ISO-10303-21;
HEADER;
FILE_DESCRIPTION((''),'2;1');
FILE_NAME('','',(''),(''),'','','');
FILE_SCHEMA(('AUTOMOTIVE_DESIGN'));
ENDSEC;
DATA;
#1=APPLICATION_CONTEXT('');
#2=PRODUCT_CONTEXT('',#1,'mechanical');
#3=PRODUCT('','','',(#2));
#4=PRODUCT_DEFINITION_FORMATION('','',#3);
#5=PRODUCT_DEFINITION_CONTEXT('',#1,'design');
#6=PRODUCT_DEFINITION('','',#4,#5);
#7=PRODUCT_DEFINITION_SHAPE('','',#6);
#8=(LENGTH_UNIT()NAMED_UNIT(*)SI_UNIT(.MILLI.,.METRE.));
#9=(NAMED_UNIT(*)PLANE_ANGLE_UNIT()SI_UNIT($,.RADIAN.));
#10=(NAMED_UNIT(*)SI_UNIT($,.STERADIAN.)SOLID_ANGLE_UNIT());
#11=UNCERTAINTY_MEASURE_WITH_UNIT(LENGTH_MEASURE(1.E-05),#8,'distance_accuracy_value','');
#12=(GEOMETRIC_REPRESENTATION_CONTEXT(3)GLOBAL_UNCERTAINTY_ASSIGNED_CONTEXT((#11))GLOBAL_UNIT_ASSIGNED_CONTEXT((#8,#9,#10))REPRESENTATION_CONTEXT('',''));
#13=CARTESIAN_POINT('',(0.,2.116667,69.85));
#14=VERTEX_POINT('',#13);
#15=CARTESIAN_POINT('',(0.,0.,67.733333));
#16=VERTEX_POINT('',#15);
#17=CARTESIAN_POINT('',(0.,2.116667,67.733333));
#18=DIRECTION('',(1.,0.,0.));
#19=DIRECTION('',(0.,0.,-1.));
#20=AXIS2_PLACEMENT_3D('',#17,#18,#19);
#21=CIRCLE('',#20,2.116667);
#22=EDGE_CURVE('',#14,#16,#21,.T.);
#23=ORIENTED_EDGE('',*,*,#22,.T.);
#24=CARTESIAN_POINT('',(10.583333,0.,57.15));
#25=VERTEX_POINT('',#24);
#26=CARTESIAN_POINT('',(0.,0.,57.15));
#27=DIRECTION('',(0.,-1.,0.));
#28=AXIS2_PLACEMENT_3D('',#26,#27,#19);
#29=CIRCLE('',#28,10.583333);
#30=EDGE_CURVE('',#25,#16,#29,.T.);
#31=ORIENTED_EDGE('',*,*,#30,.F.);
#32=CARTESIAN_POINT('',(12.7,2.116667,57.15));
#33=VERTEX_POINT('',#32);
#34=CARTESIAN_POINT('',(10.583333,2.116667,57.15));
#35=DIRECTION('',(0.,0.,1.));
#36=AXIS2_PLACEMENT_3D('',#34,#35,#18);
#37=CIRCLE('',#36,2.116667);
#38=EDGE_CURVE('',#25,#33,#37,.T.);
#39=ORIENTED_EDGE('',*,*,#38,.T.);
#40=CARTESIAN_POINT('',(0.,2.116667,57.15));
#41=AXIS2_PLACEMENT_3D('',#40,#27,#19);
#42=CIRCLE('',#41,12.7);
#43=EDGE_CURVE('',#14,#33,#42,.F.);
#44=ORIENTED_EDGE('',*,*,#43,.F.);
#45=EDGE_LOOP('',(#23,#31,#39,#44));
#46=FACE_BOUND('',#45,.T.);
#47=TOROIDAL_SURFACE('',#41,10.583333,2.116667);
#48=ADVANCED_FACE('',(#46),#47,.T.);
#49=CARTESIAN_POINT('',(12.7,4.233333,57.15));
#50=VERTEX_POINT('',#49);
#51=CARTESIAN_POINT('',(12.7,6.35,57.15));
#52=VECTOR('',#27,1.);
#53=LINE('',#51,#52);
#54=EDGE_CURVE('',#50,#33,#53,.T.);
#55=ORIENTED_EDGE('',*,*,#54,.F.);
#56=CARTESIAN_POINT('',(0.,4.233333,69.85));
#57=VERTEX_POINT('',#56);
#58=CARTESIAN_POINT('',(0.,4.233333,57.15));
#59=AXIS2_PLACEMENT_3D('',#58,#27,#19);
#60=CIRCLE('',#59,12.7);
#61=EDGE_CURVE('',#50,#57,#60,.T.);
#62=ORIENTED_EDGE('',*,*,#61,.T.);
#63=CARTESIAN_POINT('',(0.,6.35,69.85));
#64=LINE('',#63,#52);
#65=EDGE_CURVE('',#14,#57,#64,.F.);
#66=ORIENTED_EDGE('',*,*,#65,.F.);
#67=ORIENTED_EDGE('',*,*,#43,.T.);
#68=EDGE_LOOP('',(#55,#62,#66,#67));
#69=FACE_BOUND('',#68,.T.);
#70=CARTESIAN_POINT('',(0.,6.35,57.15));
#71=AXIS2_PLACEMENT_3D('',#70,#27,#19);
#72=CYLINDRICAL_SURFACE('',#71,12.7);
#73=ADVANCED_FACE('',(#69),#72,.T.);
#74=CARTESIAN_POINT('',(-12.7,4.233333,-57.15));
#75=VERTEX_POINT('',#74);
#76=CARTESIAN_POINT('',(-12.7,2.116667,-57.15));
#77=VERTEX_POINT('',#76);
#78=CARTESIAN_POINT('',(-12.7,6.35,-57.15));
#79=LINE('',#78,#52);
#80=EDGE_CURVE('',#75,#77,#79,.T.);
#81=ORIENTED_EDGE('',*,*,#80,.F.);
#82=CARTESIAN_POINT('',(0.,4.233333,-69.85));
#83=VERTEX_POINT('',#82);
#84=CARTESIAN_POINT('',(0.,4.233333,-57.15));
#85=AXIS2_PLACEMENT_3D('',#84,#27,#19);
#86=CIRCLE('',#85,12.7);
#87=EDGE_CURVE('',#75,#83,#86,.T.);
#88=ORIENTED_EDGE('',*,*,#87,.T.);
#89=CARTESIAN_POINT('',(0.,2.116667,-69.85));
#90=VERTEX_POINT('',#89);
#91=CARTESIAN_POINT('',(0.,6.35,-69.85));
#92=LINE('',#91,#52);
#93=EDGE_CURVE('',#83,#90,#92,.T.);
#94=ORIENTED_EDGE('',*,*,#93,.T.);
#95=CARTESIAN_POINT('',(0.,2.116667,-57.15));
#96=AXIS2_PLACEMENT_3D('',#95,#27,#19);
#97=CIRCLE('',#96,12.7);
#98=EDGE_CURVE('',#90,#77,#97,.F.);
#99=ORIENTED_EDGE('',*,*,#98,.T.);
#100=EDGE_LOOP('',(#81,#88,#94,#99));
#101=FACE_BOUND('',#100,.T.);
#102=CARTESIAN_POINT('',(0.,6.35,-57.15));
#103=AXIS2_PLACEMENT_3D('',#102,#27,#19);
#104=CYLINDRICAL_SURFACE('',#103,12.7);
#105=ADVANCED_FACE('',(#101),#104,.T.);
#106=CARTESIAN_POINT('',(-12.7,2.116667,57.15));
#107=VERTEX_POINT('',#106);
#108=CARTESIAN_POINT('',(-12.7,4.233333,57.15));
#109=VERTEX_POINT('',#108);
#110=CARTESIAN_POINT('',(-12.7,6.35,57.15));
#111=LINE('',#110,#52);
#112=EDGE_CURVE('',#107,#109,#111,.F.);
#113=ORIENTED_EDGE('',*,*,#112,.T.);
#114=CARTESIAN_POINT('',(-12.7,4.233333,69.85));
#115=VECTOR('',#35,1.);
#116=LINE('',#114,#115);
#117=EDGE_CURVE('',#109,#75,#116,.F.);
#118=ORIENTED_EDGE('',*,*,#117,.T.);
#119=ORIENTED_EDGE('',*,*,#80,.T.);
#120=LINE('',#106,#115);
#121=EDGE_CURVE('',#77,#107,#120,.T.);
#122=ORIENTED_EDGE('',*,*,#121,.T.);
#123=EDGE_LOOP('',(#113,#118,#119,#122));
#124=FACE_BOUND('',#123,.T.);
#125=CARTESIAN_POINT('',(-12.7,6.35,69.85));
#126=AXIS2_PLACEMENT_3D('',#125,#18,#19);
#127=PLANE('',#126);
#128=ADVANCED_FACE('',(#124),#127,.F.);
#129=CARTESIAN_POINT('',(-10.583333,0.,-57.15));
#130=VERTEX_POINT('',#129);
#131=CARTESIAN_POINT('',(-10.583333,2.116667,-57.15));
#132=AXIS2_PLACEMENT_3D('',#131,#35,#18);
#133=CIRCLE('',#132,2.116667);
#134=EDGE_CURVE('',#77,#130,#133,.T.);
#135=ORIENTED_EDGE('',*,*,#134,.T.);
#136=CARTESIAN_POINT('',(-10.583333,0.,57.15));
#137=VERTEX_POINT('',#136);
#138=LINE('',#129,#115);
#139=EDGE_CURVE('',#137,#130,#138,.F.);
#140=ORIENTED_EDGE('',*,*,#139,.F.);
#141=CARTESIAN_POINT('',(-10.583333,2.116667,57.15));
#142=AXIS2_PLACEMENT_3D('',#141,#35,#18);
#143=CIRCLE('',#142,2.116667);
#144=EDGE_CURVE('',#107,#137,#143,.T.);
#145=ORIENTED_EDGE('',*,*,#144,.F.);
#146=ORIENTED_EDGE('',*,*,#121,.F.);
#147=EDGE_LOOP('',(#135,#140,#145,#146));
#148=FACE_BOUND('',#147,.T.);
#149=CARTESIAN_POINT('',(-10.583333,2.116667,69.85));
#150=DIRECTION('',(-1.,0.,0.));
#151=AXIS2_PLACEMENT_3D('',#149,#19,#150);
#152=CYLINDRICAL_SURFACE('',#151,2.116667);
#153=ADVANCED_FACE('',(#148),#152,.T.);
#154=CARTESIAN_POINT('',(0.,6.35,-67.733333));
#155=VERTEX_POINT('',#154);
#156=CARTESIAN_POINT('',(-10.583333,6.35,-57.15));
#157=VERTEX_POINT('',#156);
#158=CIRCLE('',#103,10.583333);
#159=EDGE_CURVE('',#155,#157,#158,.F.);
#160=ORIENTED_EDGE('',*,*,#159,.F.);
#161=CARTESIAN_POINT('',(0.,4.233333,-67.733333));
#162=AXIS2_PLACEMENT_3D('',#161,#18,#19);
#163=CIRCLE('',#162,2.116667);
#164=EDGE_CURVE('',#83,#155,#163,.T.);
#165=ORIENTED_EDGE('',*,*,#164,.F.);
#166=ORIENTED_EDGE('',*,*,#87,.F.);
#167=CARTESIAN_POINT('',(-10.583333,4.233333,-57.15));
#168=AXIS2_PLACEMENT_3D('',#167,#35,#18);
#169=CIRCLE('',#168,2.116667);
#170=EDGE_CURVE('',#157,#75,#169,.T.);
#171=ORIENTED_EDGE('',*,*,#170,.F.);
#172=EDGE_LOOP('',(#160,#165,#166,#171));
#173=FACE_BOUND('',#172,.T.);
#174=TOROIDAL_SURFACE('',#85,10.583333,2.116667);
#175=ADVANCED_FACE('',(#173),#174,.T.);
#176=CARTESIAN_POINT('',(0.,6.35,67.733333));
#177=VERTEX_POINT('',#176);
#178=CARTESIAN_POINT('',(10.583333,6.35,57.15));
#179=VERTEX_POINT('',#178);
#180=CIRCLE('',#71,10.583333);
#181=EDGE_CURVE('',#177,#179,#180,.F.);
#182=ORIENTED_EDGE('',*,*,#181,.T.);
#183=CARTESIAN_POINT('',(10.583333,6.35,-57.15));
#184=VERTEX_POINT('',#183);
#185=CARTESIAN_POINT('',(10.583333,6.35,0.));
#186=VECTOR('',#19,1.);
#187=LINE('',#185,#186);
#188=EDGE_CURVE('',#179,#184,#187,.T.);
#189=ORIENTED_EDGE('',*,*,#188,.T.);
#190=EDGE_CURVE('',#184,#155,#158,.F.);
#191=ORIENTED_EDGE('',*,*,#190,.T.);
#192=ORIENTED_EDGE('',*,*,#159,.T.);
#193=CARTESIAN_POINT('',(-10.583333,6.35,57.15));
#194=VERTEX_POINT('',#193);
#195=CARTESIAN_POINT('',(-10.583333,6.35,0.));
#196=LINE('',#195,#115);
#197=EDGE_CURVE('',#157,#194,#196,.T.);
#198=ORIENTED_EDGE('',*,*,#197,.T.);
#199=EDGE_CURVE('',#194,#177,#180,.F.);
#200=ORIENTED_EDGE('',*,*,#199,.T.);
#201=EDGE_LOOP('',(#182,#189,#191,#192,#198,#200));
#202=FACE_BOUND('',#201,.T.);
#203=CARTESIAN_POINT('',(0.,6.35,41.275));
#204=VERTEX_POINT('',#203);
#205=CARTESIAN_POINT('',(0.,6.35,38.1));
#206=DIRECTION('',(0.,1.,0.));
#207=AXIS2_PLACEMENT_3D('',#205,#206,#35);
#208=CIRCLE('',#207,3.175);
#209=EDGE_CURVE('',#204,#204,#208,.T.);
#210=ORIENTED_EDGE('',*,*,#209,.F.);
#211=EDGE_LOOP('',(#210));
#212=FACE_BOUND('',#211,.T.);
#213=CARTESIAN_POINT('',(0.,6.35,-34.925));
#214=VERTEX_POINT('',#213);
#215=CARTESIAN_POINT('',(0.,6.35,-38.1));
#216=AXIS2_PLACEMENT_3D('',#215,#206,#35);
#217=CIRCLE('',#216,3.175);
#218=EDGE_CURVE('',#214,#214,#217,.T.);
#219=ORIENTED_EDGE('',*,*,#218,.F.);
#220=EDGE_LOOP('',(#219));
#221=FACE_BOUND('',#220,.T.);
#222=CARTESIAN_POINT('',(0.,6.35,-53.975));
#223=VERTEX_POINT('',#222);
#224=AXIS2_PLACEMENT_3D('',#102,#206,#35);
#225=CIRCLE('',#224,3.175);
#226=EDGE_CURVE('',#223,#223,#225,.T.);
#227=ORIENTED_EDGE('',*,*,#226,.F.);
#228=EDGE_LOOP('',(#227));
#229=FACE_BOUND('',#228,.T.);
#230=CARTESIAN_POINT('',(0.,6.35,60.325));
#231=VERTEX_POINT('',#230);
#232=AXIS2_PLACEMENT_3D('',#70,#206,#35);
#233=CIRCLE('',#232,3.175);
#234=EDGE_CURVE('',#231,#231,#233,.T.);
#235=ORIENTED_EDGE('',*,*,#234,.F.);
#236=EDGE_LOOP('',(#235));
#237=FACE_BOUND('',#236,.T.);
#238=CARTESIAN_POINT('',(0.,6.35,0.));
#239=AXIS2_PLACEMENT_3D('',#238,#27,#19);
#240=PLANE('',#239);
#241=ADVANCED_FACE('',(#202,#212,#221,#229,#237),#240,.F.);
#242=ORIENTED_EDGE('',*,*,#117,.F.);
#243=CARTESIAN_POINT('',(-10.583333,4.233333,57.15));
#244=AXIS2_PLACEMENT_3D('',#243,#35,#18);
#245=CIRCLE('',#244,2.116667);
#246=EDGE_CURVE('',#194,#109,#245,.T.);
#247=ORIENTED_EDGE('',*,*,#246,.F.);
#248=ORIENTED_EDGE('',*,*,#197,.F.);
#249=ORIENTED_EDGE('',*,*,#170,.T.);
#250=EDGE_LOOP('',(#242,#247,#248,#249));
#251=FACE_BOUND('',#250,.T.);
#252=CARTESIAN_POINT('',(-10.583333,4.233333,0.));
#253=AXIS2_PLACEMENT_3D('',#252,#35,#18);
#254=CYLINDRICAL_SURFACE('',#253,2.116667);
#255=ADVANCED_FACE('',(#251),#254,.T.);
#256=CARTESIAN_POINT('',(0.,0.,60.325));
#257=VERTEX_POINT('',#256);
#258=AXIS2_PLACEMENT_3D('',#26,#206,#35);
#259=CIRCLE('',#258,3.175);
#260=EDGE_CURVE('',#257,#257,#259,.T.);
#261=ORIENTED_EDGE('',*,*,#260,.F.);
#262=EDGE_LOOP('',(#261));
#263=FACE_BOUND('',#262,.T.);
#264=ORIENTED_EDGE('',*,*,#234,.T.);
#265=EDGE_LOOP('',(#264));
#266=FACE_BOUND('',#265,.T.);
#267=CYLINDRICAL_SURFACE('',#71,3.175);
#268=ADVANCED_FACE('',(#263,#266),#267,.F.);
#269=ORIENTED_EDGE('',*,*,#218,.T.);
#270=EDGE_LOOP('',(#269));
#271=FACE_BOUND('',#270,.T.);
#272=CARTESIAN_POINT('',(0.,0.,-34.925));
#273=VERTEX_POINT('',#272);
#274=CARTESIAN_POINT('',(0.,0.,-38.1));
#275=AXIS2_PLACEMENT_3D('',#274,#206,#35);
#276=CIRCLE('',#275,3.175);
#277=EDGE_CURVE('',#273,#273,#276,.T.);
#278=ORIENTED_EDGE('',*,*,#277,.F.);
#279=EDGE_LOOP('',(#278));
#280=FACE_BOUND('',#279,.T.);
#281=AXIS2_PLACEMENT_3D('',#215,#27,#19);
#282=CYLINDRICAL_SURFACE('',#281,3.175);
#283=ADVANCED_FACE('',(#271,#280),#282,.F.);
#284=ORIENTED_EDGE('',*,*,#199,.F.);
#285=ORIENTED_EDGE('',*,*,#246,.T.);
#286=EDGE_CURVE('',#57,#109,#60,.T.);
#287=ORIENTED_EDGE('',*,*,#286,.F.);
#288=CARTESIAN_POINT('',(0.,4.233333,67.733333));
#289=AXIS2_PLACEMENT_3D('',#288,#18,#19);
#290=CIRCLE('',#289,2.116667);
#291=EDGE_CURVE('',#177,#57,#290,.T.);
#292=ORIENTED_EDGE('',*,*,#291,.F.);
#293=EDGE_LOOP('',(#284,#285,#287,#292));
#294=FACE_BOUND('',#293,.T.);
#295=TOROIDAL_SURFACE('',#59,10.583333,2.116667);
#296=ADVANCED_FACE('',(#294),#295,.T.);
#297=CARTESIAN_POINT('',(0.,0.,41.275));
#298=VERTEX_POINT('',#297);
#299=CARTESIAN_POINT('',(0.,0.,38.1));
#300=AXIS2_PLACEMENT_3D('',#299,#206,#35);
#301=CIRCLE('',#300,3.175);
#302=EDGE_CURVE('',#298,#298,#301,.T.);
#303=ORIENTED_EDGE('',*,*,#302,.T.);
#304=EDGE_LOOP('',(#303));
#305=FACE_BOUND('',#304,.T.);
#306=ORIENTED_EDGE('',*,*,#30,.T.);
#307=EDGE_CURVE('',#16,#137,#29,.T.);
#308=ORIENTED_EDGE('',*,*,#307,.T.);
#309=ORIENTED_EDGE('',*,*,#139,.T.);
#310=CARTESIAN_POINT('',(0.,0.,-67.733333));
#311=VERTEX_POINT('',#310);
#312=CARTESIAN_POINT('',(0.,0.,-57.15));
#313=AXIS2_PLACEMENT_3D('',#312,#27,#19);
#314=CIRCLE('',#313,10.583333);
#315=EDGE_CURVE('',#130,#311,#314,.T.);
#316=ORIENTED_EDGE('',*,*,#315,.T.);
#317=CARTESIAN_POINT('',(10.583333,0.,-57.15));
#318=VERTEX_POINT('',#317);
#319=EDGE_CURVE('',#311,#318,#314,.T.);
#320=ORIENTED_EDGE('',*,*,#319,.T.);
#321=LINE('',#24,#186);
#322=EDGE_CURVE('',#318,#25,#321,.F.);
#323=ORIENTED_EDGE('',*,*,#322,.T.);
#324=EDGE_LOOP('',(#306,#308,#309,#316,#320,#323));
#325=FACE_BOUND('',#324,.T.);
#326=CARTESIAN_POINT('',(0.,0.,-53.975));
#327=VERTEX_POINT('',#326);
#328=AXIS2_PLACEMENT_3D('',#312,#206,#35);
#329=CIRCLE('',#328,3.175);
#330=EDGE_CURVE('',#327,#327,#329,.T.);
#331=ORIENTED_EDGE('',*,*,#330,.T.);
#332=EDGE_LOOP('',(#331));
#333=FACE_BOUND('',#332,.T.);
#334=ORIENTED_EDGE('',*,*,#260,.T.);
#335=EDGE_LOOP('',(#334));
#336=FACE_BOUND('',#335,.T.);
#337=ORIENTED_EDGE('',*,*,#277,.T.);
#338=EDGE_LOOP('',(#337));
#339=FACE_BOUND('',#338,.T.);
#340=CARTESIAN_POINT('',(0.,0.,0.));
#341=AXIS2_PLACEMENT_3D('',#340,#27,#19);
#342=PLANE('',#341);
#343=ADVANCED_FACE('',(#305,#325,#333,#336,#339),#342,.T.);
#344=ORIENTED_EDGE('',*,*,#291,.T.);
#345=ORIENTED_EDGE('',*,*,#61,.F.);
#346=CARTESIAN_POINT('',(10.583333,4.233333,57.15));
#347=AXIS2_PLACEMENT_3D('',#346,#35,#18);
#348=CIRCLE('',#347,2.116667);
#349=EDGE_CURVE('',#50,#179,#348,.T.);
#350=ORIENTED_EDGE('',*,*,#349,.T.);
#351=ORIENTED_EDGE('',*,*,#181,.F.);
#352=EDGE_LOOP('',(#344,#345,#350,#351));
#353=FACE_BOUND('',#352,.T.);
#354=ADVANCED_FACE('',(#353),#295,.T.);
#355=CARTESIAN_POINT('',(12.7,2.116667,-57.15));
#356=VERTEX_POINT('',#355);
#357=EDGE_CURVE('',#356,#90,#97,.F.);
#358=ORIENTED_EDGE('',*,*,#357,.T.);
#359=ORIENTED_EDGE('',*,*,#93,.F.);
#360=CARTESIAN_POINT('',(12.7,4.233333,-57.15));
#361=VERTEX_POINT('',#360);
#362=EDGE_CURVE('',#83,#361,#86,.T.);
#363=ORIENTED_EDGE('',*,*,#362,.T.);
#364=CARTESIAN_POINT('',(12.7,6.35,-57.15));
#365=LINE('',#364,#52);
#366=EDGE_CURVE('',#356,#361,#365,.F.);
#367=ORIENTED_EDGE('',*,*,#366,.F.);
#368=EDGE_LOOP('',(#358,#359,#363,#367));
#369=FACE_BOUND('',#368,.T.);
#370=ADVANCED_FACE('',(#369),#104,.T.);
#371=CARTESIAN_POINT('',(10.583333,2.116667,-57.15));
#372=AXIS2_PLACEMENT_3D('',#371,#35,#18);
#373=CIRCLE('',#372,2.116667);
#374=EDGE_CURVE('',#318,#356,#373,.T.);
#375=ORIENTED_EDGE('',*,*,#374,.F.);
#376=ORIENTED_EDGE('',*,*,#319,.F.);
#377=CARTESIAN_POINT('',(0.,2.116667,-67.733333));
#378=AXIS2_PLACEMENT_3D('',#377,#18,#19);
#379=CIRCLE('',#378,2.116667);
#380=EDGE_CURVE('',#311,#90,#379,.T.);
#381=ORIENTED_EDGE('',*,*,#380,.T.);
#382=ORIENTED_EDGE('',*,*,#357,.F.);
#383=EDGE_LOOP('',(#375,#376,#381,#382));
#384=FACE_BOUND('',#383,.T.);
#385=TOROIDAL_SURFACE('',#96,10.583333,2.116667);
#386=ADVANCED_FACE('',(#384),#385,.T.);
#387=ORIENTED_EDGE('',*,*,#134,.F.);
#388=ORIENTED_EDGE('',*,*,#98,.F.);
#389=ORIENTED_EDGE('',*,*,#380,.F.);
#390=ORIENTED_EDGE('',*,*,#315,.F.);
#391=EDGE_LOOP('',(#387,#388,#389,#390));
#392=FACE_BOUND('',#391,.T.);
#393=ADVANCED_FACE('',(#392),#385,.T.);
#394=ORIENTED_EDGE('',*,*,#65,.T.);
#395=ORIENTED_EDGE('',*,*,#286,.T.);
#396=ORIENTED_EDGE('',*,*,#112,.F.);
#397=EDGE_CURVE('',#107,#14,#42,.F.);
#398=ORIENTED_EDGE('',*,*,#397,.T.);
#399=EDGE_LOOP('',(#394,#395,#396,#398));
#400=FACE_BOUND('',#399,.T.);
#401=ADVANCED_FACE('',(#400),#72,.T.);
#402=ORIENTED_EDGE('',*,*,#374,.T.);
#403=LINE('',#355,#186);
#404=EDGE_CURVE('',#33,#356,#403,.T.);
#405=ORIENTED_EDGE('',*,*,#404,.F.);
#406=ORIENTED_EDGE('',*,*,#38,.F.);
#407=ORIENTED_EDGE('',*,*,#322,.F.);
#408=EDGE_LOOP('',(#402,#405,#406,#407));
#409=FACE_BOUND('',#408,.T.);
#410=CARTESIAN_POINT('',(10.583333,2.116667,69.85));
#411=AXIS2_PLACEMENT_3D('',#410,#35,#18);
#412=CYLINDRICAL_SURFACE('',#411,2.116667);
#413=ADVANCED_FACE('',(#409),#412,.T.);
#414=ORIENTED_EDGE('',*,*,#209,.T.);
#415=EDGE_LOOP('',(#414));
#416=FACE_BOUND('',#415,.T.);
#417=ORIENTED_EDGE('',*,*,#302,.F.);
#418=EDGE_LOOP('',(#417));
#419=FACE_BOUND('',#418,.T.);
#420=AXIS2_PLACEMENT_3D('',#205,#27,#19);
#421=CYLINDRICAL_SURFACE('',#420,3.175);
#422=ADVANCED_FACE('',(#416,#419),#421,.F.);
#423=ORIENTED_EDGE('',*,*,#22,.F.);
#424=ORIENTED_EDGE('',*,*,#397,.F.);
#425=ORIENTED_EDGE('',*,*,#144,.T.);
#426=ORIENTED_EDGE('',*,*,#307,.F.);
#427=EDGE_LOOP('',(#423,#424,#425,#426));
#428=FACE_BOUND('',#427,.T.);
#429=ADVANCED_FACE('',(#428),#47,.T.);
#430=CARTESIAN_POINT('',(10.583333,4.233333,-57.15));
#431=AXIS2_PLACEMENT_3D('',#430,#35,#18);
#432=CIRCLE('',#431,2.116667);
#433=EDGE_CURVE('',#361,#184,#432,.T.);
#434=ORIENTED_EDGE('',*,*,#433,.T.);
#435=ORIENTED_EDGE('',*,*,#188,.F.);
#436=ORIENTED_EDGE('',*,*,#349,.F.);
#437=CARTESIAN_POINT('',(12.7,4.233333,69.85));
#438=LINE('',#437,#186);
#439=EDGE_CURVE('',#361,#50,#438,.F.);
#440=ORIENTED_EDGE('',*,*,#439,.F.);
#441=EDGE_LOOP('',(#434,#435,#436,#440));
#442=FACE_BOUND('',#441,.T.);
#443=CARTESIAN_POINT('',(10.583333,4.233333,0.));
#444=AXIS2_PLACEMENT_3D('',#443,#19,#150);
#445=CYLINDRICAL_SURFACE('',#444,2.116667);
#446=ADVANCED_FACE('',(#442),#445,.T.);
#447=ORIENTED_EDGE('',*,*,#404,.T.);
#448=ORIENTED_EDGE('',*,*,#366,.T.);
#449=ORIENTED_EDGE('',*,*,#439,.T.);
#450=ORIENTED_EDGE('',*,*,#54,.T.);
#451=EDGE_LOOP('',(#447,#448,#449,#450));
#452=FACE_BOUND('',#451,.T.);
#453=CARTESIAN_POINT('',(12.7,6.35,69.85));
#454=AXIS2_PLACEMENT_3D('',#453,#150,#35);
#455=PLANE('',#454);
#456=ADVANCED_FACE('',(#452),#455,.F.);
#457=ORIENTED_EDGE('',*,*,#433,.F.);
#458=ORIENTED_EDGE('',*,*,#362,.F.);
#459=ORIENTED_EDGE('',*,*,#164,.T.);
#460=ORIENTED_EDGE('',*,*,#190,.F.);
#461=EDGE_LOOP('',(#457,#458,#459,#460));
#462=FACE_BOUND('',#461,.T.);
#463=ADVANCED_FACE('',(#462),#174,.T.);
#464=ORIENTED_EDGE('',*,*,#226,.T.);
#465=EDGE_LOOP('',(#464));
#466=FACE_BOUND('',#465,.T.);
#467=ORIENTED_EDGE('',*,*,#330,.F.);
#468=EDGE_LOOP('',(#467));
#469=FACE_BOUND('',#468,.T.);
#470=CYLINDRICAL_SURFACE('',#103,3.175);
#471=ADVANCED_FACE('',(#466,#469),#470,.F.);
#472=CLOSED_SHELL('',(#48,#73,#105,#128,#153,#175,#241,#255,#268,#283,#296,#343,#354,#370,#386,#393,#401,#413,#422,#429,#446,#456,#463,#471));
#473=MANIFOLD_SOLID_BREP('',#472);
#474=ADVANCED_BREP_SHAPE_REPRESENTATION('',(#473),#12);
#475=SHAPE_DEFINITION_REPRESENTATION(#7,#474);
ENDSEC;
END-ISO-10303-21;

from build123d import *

# Parameters (mm, degrees)
SKETCH1_W           = 25.4
SKETCH1_H           = 139.7
SKETCH1_R           = 3.175
BOSS_EXTRUDE1_DEPTH = 6.35
FILLET2_R           = 12.7
FILLET3_R           = 2.116666667


with BuildPart() as part:
    # Sketch1 → Boss-Extrude1 (new body)
    with BuildSketch(Plane(origin=(0, 0, 0), x_dir=(1, 0, 0), z_dir=(0, 1, 0))):
        Rectangle(SKETCH1_W, SKETCH1_H)
        with Locations(Location((0, -57.15, 0), (0, 0, 270))):
            Circle(SKETCH1_R, mode=Mode.SUBTRACT)
        with Locations(Location((0, 38.1, 0), (0, 0, 270))):
            Circle(SKETCH1_R, mode=Mode.SUBTRACT)
        with Locations(Location((0, 57.15, 0), (0, 0, 270))):
            Circle(SKETCH1_R, mode=Mode.SUBTRACT)
        with Locations(Location((0, -38.1, 0), (0, 0, 270))):
            Circle(SKETCH1_R, mode=Mode.SUBTRACT)
    extrude(amount=BOSS_EXTRUDE1_DEPTH)

    # Fillet2
    fillet2_edges = [part.edges().sort_by_distance(p)[0] for p in [
        (-12.7, 3.175, -69.85),
        (12.7, 3.175, -69.85),
        (-12.7, 3.175, 69.85),
        (12.7, 3.175, 69.85),
    ]]
    fillet(fillet2_edges, radius=FILLET2_R - 0.0001)  # a hair under: the kernel refuses the full size

    # Fillet3
    fillet3_edges = [part.edges().sort_by_distance(p)[0] for p in [
        (-12.7, 0, 0),
        (-12.7, 6.35, 0),
        (12.7, 0, 0),
        (8.98028541, 0, 66.13028541),
        (-8.98028541, 0, 66.13028541),
        (8.98028541, 0, -66.13028541),
        (-8.98028541, 0, -66.13028541),
        (12.7, 6.35, 0),
        (8.98028541, 6.35, 66.13028541),
        (-8.98028541, 6.35, 66.13028541),
        (8.98028541, 6.35, -66.13028541),
        (-8.98028541, 6.35, -66.13028541),
    ]]
    fillet(fillet3_edges, radius=FILLET3_R)


solid = part.part
